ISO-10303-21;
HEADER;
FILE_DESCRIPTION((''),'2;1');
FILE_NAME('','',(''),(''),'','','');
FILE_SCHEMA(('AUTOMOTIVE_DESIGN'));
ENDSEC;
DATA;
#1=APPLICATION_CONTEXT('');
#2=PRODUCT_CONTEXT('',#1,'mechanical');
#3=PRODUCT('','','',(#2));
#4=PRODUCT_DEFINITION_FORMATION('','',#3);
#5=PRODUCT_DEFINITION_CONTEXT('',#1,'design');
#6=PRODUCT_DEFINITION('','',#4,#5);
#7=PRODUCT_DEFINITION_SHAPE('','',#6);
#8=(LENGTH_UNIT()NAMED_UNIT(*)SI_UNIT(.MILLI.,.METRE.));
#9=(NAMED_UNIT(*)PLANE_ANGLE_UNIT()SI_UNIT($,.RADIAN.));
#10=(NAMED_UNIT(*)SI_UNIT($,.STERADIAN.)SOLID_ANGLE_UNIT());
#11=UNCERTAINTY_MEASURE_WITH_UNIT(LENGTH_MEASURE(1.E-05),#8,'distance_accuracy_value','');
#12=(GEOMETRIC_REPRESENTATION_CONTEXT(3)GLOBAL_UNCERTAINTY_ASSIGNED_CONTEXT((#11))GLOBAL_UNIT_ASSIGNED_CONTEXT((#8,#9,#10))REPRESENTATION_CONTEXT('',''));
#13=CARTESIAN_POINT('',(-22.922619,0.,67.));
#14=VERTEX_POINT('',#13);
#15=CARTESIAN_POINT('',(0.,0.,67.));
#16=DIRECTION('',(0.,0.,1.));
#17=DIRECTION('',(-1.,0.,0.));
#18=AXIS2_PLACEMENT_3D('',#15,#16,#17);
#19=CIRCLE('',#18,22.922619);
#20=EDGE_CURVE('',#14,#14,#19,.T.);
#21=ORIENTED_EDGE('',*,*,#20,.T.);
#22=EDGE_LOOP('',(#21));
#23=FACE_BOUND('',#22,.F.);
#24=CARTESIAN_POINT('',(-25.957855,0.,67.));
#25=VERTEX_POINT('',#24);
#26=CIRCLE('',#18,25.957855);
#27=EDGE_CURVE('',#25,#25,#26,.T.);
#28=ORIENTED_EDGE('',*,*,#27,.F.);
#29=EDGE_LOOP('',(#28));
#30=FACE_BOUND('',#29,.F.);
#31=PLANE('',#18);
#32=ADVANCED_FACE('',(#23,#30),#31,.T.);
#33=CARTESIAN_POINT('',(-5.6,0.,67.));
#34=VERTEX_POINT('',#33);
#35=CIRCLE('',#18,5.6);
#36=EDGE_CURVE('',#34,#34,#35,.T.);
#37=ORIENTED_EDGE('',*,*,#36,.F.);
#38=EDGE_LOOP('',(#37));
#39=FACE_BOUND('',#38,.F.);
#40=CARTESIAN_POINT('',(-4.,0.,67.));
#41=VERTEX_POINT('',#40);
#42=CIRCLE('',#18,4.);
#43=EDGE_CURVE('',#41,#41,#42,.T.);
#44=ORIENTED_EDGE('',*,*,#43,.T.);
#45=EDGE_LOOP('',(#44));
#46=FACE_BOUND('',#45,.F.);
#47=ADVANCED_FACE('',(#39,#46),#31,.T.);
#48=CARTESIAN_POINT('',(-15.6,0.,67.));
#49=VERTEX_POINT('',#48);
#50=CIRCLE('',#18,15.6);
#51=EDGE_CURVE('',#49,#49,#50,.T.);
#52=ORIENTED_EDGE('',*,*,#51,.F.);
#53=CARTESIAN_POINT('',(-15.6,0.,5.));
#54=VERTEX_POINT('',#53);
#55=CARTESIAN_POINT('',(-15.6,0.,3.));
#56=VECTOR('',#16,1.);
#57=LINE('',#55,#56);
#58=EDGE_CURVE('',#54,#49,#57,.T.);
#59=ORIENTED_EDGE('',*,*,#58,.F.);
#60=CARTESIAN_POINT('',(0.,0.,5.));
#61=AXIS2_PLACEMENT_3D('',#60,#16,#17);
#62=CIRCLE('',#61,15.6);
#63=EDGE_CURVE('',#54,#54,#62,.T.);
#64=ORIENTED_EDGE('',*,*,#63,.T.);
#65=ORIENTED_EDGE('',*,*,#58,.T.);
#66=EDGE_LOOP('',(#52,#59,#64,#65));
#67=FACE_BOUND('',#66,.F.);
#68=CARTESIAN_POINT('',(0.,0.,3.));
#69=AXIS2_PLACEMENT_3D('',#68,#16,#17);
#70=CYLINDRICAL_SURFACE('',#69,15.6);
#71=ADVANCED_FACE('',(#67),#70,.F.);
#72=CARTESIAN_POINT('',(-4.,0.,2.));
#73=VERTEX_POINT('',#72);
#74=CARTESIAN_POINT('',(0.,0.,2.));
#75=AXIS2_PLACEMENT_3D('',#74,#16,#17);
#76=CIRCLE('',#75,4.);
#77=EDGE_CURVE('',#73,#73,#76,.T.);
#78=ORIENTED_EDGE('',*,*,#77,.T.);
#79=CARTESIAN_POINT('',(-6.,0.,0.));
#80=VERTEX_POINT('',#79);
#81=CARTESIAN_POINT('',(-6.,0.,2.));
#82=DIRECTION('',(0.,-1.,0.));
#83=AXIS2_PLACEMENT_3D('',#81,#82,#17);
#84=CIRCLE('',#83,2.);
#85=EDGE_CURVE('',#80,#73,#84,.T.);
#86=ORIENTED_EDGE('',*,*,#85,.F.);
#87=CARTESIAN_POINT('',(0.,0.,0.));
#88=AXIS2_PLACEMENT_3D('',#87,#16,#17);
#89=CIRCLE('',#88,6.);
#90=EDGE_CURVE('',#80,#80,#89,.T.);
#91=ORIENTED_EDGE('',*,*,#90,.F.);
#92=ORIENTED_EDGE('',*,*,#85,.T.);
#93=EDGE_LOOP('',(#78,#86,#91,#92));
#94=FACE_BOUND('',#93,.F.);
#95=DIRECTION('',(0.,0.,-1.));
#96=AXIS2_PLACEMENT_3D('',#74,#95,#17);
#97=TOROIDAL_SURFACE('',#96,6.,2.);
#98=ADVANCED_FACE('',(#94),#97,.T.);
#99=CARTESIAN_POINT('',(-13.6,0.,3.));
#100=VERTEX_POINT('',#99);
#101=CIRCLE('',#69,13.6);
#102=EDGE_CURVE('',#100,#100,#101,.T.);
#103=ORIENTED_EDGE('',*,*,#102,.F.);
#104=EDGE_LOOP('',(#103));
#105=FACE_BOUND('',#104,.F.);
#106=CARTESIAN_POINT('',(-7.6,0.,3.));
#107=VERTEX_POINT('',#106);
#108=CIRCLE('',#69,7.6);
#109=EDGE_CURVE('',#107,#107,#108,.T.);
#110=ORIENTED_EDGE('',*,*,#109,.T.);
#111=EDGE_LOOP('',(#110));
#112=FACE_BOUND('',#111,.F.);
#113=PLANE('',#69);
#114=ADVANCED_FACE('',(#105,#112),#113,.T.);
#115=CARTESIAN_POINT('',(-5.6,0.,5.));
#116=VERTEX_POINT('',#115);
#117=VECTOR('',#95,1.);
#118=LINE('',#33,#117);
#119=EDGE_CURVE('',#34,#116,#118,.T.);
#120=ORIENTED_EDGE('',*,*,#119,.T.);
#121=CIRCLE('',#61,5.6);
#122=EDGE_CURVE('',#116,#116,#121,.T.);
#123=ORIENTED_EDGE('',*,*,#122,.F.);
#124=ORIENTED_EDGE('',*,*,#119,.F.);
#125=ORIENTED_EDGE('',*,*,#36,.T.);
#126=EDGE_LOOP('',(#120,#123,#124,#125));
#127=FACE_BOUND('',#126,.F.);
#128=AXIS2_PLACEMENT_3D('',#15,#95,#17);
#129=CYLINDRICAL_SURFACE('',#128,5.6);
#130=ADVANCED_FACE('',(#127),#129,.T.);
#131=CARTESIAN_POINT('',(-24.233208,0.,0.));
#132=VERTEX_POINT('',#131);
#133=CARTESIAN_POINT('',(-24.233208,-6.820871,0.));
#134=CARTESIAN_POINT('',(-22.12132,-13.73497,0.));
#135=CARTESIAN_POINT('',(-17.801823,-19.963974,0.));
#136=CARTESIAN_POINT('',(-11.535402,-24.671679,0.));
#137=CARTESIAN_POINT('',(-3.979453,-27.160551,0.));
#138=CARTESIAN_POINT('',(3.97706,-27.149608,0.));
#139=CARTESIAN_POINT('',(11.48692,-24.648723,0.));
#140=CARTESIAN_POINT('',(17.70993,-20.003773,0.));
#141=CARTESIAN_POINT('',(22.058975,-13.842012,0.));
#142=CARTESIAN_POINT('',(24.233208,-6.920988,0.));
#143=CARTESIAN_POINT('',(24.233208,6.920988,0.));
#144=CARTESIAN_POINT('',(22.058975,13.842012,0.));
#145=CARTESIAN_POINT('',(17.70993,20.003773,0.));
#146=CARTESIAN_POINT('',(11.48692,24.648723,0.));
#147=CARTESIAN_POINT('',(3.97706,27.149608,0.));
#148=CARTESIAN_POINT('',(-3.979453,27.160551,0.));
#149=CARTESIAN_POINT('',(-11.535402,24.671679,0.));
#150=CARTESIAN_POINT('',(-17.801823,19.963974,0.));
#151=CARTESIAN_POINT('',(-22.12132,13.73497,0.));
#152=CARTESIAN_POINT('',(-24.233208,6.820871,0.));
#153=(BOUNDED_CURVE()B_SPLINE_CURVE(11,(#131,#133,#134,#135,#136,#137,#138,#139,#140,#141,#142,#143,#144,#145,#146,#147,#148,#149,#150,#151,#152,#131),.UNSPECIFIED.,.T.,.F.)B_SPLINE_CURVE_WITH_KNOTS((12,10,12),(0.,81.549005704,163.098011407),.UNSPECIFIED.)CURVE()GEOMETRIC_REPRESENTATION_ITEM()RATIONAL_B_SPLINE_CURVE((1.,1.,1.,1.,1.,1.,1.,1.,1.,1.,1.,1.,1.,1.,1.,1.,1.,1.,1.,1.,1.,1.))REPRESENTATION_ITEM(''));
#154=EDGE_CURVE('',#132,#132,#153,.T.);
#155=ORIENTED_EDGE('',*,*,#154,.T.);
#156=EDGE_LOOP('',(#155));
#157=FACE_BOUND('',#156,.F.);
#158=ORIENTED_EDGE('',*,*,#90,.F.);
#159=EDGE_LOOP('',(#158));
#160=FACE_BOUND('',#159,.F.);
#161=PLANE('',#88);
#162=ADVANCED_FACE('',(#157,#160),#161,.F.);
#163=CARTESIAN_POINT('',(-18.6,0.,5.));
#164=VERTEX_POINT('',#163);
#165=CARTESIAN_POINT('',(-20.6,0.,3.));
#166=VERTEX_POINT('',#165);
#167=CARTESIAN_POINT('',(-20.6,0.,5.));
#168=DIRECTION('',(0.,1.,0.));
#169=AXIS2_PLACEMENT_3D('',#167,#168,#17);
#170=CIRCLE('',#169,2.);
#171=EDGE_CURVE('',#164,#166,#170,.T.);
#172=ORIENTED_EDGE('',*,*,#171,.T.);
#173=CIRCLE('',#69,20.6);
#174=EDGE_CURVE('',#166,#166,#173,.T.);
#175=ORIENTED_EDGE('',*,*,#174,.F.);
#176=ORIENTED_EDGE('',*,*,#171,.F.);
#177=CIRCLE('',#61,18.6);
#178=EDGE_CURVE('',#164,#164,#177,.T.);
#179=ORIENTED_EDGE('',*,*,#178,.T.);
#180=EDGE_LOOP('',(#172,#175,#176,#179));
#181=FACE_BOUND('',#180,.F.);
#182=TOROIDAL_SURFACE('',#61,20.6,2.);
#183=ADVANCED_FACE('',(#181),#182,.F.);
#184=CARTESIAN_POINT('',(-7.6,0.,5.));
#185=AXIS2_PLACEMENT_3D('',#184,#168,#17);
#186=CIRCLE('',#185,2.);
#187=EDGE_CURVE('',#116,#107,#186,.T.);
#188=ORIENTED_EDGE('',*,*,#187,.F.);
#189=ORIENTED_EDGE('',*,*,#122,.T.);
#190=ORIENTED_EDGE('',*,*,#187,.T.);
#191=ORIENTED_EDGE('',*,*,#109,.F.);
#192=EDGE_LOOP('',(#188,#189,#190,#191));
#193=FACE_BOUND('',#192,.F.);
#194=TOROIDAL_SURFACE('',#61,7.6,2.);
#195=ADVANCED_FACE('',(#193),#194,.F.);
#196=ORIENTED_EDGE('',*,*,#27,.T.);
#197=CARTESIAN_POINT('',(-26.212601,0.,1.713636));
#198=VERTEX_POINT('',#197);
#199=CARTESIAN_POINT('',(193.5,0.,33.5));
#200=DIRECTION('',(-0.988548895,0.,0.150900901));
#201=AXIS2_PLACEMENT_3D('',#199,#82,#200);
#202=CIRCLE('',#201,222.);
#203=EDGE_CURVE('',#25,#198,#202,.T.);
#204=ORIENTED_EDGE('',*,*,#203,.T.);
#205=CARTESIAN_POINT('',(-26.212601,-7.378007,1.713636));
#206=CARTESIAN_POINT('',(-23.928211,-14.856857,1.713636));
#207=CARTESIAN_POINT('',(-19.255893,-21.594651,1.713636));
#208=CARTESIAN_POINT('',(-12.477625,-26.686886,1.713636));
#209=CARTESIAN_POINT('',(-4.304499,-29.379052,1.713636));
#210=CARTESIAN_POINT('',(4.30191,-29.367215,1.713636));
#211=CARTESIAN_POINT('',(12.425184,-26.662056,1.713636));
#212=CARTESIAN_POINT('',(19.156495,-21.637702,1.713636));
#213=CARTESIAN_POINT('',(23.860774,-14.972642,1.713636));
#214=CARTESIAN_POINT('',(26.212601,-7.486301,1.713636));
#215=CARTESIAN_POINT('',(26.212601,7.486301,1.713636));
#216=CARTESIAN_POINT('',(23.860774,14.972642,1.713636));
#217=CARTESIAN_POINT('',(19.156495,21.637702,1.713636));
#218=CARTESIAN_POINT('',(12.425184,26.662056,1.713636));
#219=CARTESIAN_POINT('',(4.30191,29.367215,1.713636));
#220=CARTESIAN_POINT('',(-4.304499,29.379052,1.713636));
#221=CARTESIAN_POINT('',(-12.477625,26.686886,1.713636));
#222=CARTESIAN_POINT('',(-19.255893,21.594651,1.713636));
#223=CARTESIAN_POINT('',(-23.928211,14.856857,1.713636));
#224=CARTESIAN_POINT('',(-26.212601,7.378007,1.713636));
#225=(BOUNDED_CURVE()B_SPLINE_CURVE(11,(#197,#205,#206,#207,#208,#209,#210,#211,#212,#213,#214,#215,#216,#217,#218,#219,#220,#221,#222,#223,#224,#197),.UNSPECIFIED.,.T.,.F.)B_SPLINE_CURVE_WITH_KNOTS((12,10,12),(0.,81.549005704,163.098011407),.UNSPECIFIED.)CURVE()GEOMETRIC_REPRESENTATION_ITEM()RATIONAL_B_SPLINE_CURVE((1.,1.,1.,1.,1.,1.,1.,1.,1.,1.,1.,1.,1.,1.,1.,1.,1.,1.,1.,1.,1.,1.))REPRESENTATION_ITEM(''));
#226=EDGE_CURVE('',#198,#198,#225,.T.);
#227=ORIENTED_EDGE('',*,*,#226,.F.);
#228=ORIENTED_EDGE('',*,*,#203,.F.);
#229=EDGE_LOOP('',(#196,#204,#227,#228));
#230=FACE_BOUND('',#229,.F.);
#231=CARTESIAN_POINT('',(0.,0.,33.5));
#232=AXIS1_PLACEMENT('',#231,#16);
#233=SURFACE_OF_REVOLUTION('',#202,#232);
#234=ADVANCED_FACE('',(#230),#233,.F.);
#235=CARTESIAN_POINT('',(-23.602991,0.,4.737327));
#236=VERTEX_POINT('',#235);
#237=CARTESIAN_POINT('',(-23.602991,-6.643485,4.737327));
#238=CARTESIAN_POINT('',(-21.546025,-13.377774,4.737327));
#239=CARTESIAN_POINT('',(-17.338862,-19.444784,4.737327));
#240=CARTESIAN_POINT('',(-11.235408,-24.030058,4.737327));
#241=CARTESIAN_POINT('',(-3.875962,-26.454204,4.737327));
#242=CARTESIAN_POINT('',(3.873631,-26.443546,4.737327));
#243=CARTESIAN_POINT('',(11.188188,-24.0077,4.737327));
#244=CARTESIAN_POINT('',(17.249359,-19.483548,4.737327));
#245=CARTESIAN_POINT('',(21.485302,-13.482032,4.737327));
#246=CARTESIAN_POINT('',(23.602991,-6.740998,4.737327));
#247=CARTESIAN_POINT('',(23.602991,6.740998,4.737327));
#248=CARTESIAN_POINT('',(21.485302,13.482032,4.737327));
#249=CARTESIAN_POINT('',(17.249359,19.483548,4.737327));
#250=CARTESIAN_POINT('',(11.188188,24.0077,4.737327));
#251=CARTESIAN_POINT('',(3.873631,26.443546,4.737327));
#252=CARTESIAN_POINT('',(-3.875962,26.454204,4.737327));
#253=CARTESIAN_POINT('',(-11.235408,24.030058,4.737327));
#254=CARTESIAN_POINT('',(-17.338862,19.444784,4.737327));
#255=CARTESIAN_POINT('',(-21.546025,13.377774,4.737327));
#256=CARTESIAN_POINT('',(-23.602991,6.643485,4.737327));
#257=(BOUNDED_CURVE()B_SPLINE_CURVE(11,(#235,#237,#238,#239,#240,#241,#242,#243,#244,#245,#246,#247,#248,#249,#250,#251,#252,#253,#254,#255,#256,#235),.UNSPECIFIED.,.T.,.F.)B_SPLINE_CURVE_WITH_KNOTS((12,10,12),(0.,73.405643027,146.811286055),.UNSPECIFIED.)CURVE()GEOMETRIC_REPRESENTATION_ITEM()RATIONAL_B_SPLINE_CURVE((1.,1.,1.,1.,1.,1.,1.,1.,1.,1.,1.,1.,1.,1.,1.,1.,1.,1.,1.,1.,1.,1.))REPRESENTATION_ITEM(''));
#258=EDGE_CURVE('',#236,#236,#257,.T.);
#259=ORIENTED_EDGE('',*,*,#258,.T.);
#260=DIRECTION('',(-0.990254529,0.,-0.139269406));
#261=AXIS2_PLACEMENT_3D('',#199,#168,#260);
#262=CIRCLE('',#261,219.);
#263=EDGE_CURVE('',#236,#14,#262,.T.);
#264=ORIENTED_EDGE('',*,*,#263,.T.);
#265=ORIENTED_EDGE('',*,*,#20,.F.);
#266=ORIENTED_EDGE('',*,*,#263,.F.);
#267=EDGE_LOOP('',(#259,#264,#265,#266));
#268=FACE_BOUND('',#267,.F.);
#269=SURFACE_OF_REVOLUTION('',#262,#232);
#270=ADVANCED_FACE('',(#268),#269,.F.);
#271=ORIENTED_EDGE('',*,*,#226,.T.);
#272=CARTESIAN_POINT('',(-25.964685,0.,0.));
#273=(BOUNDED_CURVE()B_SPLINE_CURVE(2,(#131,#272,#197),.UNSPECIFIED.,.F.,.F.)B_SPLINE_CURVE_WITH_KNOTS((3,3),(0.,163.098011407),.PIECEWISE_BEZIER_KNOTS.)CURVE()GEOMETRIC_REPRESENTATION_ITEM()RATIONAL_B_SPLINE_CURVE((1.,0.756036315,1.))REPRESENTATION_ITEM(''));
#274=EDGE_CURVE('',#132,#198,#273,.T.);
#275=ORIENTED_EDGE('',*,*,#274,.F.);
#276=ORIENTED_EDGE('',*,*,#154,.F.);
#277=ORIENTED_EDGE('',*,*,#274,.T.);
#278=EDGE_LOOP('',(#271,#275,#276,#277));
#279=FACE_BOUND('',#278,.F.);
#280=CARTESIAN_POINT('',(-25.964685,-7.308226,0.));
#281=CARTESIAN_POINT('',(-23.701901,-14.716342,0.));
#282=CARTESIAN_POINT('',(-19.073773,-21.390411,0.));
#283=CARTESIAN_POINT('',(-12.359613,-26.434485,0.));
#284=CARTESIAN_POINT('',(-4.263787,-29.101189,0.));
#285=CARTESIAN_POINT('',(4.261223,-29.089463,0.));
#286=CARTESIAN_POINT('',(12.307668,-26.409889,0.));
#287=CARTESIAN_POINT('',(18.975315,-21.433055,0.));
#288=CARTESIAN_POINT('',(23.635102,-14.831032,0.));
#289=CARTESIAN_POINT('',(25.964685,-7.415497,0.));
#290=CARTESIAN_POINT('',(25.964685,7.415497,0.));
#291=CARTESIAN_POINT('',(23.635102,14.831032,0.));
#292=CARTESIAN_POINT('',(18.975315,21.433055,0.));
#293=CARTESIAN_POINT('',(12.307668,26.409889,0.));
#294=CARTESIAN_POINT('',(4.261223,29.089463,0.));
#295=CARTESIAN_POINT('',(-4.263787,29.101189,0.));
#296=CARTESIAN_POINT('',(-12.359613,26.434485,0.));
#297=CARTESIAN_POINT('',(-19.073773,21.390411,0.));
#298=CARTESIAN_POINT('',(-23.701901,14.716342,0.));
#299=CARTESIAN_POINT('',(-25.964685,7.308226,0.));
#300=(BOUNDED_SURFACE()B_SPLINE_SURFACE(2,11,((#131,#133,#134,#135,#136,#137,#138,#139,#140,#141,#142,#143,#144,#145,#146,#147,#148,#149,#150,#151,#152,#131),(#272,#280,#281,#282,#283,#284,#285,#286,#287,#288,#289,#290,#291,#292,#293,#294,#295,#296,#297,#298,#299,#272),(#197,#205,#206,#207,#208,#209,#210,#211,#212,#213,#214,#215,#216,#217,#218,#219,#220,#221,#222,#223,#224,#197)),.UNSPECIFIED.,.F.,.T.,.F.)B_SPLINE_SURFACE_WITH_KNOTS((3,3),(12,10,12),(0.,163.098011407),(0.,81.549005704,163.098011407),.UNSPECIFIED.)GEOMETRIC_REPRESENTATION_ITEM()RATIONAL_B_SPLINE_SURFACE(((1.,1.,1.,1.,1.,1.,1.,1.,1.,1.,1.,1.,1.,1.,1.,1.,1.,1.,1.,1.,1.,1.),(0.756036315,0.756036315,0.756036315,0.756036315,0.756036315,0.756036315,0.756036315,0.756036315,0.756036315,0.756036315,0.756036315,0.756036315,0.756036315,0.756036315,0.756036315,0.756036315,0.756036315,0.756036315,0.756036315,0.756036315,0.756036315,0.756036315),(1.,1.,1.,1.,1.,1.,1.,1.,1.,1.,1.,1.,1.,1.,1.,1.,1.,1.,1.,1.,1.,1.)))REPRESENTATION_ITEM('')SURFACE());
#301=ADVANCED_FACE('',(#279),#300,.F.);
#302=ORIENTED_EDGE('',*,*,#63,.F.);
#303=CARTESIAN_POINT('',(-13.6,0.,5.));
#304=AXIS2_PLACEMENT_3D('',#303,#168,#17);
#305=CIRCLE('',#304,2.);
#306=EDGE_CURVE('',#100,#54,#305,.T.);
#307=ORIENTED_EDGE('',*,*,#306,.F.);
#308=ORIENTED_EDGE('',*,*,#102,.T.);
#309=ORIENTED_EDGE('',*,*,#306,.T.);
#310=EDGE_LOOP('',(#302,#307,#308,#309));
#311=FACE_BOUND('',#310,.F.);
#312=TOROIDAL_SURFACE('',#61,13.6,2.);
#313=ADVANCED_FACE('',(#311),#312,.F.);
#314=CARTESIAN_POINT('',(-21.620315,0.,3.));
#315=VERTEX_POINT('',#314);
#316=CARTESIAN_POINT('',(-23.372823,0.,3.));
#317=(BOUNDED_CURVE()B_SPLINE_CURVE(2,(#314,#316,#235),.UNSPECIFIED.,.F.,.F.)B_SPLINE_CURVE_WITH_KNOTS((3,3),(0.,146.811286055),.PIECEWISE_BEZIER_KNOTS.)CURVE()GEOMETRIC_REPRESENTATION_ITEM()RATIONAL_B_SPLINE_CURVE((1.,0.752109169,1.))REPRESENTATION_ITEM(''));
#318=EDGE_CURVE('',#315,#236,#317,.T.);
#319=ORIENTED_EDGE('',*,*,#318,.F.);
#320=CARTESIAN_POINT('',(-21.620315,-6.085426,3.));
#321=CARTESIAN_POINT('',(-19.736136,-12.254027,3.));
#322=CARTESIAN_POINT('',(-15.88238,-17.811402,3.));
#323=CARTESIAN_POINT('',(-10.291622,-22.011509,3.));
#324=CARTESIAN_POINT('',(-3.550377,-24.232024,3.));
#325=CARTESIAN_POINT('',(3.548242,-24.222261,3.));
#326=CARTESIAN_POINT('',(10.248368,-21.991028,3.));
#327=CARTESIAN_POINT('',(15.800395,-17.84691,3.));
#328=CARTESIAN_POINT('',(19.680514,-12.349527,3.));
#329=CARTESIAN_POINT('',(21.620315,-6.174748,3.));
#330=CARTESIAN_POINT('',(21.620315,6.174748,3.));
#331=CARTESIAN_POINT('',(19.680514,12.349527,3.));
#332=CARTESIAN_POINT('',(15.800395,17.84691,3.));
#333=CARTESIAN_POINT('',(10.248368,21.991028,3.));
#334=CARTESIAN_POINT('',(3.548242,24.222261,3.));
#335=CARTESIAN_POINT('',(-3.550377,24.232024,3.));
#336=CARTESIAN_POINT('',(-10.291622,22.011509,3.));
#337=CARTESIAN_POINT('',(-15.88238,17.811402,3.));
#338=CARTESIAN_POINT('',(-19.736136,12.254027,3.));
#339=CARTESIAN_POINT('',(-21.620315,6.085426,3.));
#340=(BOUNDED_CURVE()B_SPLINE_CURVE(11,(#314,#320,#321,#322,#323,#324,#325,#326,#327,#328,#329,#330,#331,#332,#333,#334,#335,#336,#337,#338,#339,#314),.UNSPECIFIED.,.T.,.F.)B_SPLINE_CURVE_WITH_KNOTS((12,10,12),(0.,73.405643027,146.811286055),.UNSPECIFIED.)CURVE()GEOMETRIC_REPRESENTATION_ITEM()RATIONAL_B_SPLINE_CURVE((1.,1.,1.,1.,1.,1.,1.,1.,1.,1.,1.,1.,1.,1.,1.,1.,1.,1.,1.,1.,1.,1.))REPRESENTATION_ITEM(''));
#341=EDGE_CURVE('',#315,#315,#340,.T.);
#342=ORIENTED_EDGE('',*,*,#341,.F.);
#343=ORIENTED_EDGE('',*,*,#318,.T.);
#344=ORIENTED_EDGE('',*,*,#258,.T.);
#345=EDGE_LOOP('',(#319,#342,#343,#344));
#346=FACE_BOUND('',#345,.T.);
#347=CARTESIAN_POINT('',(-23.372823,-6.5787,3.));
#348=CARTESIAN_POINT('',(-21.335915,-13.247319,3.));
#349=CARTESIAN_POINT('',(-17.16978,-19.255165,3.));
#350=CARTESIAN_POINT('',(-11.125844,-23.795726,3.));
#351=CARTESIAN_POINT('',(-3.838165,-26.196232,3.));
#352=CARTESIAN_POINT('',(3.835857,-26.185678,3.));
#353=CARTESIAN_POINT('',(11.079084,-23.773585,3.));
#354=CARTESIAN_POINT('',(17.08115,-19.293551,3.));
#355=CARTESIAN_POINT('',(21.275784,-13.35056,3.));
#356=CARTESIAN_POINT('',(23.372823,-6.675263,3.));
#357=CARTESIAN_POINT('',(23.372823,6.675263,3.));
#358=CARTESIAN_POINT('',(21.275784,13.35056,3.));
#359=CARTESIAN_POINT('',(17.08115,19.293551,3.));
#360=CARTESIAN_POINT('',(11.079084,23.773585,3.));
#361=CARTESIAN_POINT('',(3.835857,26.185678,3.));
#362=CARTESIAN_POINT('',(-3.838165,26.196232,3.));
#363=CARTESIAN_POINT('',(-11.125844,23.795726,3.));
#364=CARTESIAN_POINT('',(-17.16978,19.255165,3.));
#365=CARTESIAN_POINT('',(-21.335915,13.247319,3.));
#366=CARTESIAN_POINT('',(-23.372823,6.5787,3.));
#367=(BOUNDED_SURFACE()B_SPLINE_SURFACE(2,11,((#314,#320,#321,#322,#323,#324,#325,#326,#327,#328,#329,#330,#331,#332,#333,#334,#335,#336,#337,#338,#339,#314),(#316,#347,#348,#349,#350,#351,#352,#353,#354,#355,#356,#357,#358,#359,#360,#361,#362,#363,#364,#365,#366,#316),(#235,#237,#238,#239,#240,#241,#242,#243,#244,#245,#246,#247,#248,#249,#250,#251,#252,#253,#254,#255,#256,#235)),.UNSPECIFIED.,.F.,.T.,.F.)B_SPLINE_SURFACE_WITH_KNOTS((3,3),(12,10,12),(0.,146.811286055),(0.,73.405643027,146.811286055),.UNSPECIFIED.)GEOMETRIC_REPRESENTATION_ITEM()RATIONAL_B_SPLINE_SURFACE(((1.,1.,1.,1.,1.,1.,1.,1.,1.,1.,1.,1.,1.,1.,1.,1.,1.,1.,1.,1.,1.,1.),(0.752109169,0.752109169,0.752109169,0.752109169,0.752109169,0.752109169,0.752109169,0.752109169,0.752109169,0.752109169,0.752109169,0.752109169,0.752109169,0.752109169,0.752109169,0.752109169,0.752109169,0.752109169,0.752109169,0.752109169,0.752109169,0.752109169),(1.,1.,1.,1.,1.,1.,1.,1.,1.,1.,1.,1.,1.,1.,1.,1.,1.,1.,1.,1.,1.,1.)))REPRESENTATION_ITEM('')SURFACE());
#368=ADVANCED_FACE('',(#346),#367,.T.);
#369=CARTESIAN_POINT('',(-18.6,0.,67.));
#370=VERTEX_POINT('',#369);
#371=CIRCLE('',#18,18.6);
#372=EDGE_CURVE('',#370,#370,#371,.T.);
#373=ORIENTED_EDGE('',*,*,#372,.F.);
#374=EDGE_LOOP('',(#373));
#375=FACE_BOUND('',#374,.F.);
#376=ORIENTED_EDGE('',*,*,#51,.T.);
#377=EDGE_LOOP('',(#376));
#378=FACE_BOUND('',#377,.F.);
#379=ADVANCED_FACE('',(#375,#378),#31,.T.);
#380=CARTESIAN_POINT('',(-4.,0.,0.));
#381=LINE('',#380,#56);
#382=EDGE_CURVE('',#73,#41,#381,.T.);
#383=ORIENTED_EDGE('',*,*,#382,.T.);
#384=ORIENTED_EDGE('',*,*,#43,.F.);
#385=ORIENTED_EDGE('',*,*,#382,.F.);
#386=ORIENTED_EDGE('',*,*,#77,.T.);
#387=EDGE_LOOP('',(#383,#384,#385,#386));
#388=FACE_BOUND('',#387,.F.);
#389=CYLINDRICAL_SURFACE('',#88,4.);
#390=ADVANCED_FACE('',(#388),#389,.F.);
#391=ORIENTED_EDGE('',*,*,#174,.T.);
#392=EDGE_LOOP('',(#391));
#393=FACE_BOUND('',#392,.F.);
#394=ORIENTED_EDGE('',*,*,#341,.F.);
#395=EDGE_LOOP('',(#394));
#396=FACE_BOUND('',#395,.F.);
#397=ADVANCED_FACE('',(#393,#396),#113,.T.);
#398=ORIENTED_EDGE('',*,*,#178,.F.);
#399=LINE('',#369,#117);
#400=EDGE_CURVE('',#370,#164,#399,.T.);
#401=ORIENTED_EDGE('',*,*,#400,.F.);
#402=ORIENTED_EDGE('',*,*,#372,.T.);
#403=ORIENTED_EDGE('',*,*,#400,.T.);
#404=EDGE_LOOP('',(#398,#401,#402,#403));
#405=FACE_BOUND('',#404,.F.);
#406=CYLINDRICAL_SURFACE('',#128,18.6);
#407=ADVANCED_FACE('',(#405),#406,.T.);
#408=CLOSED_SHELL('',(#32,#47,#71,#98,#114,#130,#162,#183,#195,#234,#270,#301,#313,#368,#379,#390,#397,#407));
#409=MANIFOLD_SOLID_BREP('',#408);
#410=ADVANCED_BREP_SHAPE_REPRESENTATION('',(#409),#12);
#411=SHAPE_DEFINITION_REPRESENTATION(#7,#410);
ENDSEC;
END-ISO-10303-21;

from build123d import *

# Parameters (mm, degrees)
F2_R = 2


# Not quite as in the source:
# - two fillets or chamfers of one size are made in one step
# - a feature names something its author has since deleted; it is built from what else it names


with BuildPart() as f1:
    # F0 (on Front) → F1 (revolve)
    with BuildSketch(Plane.XZ):
        with BuildLine():
            Line((-25.9578547239, 0), (-4, 0))
            Line((-4, 0), (-4, 67))
            Line((-4, 67), (-5.6, 67))
            Line((-5.6, 67), (-5.6, 3))
            Line((-5.6, 3), (-15.6, 3))
            Line((-15.6, 3), (-15.6, 67))
            Line((-15.6, 67), (-18.6, 67))
            Line((-18.6, 67), (-18.6, 3))
            Line((-18.6, 3), (-23.3657418773, 3))
            ThreePointArc((-23.3657418773, 3), (-25.4947508744, 35.0162748691), (-22.9226189658, 67))
            Line((-22.9226189658, 67), (-25.9578547239, 67))
            ThreePointArc((-25.9578547239, 67), (-28.5, 33.5), (-25.9578547239, 0))
        make_face()
    revolve(axis=Axis((0, 0, 33.5), (0, 0, 1)))

    # F2
    f2_edges = [f1.edges().sort_by_distance(p)[0] for p in [
        (15.6, 0, 3),
        (23.365742, 0, 3),
        (18.6, 0, 3),
        (4, 0, 0),
        (25.957855, 0, 0),
        (5.6, 0, 3),
    ]]
    fillet(f2_edges, radius=F2_R)


solid = f1.part
